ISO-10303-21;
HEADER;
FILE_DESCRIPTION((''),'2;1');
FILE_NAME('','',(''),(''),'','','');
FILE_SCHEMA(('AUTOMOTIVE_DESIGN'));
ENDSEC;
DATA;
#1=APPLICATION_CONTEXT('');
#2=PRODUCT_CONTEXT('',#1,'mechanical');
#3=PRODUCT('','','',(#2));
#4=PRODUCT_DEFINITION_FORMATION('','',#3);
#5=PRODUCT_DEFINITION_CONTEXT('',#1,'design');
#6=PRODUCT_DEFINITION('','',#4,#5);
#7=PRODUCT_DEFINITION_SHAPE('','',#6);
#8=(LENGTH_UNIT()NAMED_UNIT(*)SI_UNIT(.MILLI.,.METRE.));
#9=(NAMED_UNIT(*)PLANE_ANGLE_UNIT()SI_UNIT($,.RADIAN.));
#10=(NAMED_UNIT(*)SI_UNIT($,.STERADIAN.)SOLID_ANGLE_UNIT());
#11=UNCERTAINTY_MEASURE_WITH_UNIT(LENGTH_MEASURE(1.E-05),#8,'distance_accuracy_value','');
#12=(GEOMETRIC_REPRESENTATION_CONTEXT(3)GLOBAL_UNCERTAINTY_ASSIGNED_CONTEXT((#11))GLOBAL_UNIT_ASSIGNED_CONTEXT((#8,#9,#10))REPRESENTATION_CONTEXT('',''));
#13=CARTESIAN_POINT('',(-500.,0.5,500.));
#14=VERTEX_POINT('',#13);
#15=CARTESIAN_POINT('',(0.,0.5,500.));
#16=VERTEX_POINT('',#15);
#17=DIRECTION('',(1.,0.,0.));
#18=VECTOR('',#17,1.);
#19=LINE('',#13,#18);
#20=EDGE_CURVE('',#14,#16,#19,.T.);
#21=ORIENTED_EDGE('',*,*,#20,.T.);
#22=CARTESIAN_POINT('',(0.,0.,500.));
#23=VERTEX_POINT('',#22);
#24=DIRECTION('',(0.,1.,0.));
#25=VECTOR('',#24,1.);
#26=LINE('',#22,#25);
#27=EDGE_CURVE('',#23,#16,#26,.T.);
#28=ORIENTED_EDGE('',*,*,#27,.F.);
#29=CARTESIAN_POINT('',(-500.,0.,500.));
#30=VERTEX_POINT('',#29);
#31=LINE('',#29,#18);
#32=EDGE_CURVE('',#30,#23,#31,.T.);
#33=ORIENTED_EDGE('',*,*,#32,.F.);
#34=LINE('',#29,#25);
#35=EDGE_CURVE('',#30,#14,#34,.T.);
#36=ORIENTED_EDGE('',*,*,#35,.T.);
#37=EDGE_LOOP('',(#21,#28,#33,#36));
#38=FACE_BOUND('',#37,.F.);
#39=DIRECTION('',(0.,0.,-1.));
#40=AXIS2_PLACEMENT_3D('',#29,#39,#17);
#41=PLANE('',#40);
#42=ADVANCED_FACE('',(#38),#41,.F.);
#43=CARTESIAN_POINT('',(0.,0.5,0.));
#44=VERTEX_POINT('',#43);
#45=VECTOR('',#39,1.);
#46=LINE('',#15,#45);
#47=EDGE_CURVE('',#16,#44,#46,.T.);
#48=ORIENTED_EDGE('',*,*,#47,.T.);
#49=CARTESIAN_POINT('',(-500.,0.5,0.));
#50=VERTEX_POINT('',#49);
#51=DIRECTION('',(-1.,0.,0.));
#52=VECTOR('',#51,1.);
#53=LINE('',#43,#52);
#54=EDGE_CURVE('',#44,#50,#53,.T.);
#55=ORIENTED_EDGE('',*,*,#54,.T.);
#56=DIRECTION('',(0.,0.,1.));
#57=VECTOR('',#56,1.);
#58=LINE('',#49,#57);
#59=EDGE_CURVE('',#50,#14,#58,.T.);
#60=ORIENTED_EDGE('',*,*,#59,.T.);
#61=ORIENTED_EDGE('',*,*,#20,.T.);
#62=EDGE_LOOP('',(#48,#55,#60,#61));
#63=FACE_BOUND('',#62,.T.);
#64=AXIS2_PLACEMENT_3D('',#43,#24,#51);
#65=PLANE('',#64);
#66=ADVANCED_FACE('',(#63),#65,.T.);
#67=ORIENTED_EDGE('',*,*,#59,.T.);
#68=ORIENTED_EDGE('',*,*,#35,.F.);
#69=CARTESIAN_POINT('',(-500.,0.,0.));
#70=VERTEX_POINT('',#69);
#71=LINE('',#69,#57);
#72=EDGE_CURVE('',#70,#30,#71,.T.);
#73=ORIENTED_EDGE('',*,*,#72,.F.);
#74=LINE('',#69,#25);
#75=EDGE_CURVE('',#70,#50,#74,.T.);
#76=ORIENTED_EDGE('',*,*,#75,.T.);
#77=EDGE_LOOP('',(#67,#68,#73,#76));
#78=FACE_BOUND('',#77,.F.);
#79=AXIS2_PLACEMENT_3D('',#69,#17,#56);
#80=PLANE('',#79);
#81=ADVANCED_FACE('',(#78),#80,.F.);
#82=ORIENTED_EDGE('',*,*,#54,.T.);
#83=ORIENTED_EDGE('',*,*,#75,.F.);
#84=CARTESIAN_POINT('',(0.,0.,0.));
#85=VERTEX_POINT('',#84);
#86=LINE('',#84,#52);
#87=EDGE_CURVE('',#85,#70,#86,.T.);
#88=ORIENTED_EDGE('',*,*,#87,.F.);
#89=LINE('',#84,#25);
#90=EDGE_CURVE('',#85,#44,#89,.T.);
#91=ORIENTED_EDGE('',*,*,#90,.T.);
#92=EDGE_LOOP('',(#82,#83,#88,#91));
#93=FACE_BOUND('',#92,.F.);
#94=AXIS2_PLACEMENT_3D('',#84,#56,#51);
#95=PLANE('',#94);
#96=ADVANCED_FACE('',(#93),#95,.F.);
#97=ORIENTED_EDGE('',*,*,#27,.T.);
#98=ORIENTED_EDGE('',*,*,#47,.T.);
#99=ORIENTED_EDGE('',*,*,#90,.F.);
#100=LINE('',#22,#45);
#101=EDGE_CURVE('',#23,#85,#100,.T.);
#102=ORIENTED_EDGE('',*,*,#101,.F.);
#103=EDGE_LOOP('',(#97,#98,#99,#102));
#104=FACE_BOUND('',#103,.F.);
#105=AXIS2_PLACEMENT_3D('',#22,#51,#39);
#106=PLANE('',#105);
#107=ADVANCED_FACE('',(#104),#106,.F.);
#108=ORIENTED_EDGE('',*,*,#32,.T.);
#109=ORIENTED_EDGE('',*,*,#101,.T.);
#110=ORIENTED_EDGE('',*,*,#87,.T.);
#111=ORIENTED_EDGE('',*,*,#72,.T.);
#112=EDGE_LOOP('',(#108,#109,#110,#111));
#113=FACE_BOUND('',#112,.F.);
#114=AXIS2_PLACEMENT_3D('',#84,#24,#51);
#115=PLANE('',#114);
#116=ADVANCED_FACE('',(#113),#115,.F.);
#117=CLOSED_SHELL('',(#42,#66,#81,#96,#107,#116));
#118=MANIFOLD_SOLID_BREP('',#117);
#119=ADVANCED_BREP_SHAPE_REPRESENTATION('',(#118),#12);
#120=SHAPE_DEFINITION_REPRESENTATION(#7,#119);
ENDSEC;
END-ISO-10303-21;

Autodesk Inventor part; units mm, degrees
ref_plane "YZ Plane" through (0, 0, 0) normal (1, 0, 0) x (0, 1, 0)
ref_plane "XZ Plane" through (0, 0, 0) normal (0, 1, 0) x (-1, 0, 0)
ref_plane "XY Plane" through (0, 0, 0) normal (0, 0, 1) x (1, 0, 0)
sketch "Sketch1" plane through (0, 0, 0) normal (0, 1, 0) x (-1, 0, 0)
  line L0 (0, 0) -> (500, 0)
  line L1 (500, 0) -> (500, 500)
  line L2 (500, 500) -> (0, 500)
  line L3 (0, 500) -> (0, 0)
  line L4 (500, 500) -> (0, 500)
  line L5 (0, 0) -> (500, 0)
  dimension "d0" = 500
  dimension "d1" = 500
sketch "Sketch2" plane through (0, 0, 0) normal (0, 1, 0) x (-1, 0, 0)
  line L0 (500.3847, 350) -> (0, 350)
  line L1 (500.3847, 250) -> (0, 250)
  line L2 (500.3847, 100) -> (0, 100)
  point P0 (0, 0)
  dimension "d3" = 100
  dimension "d4" = 150
  dimension "d5" = 100
extrude "Plate1" add sketch "Sketch1" along normal blind 0.5
equation "\"BendRadius\" = Thickness"
equation "\"BendReliefWidth\" = Thickness"
equation "\"BendReliefDepth\" = 0.5 * Thickness"
equation "\"CornerReliefSize\" = 4 * Thickness"
equation "\"MinimumRemnant\" = 2 * Thickness"
equation "\"TransitionRadius\" = BendRadius"
equation "\"JacobiRadiusSize\" = BendRadius"
equation "\"GapSize\" = Thickness"
equation "\"d6\" = BendRadius"
equation "\"Thickness\" = 0.5"
